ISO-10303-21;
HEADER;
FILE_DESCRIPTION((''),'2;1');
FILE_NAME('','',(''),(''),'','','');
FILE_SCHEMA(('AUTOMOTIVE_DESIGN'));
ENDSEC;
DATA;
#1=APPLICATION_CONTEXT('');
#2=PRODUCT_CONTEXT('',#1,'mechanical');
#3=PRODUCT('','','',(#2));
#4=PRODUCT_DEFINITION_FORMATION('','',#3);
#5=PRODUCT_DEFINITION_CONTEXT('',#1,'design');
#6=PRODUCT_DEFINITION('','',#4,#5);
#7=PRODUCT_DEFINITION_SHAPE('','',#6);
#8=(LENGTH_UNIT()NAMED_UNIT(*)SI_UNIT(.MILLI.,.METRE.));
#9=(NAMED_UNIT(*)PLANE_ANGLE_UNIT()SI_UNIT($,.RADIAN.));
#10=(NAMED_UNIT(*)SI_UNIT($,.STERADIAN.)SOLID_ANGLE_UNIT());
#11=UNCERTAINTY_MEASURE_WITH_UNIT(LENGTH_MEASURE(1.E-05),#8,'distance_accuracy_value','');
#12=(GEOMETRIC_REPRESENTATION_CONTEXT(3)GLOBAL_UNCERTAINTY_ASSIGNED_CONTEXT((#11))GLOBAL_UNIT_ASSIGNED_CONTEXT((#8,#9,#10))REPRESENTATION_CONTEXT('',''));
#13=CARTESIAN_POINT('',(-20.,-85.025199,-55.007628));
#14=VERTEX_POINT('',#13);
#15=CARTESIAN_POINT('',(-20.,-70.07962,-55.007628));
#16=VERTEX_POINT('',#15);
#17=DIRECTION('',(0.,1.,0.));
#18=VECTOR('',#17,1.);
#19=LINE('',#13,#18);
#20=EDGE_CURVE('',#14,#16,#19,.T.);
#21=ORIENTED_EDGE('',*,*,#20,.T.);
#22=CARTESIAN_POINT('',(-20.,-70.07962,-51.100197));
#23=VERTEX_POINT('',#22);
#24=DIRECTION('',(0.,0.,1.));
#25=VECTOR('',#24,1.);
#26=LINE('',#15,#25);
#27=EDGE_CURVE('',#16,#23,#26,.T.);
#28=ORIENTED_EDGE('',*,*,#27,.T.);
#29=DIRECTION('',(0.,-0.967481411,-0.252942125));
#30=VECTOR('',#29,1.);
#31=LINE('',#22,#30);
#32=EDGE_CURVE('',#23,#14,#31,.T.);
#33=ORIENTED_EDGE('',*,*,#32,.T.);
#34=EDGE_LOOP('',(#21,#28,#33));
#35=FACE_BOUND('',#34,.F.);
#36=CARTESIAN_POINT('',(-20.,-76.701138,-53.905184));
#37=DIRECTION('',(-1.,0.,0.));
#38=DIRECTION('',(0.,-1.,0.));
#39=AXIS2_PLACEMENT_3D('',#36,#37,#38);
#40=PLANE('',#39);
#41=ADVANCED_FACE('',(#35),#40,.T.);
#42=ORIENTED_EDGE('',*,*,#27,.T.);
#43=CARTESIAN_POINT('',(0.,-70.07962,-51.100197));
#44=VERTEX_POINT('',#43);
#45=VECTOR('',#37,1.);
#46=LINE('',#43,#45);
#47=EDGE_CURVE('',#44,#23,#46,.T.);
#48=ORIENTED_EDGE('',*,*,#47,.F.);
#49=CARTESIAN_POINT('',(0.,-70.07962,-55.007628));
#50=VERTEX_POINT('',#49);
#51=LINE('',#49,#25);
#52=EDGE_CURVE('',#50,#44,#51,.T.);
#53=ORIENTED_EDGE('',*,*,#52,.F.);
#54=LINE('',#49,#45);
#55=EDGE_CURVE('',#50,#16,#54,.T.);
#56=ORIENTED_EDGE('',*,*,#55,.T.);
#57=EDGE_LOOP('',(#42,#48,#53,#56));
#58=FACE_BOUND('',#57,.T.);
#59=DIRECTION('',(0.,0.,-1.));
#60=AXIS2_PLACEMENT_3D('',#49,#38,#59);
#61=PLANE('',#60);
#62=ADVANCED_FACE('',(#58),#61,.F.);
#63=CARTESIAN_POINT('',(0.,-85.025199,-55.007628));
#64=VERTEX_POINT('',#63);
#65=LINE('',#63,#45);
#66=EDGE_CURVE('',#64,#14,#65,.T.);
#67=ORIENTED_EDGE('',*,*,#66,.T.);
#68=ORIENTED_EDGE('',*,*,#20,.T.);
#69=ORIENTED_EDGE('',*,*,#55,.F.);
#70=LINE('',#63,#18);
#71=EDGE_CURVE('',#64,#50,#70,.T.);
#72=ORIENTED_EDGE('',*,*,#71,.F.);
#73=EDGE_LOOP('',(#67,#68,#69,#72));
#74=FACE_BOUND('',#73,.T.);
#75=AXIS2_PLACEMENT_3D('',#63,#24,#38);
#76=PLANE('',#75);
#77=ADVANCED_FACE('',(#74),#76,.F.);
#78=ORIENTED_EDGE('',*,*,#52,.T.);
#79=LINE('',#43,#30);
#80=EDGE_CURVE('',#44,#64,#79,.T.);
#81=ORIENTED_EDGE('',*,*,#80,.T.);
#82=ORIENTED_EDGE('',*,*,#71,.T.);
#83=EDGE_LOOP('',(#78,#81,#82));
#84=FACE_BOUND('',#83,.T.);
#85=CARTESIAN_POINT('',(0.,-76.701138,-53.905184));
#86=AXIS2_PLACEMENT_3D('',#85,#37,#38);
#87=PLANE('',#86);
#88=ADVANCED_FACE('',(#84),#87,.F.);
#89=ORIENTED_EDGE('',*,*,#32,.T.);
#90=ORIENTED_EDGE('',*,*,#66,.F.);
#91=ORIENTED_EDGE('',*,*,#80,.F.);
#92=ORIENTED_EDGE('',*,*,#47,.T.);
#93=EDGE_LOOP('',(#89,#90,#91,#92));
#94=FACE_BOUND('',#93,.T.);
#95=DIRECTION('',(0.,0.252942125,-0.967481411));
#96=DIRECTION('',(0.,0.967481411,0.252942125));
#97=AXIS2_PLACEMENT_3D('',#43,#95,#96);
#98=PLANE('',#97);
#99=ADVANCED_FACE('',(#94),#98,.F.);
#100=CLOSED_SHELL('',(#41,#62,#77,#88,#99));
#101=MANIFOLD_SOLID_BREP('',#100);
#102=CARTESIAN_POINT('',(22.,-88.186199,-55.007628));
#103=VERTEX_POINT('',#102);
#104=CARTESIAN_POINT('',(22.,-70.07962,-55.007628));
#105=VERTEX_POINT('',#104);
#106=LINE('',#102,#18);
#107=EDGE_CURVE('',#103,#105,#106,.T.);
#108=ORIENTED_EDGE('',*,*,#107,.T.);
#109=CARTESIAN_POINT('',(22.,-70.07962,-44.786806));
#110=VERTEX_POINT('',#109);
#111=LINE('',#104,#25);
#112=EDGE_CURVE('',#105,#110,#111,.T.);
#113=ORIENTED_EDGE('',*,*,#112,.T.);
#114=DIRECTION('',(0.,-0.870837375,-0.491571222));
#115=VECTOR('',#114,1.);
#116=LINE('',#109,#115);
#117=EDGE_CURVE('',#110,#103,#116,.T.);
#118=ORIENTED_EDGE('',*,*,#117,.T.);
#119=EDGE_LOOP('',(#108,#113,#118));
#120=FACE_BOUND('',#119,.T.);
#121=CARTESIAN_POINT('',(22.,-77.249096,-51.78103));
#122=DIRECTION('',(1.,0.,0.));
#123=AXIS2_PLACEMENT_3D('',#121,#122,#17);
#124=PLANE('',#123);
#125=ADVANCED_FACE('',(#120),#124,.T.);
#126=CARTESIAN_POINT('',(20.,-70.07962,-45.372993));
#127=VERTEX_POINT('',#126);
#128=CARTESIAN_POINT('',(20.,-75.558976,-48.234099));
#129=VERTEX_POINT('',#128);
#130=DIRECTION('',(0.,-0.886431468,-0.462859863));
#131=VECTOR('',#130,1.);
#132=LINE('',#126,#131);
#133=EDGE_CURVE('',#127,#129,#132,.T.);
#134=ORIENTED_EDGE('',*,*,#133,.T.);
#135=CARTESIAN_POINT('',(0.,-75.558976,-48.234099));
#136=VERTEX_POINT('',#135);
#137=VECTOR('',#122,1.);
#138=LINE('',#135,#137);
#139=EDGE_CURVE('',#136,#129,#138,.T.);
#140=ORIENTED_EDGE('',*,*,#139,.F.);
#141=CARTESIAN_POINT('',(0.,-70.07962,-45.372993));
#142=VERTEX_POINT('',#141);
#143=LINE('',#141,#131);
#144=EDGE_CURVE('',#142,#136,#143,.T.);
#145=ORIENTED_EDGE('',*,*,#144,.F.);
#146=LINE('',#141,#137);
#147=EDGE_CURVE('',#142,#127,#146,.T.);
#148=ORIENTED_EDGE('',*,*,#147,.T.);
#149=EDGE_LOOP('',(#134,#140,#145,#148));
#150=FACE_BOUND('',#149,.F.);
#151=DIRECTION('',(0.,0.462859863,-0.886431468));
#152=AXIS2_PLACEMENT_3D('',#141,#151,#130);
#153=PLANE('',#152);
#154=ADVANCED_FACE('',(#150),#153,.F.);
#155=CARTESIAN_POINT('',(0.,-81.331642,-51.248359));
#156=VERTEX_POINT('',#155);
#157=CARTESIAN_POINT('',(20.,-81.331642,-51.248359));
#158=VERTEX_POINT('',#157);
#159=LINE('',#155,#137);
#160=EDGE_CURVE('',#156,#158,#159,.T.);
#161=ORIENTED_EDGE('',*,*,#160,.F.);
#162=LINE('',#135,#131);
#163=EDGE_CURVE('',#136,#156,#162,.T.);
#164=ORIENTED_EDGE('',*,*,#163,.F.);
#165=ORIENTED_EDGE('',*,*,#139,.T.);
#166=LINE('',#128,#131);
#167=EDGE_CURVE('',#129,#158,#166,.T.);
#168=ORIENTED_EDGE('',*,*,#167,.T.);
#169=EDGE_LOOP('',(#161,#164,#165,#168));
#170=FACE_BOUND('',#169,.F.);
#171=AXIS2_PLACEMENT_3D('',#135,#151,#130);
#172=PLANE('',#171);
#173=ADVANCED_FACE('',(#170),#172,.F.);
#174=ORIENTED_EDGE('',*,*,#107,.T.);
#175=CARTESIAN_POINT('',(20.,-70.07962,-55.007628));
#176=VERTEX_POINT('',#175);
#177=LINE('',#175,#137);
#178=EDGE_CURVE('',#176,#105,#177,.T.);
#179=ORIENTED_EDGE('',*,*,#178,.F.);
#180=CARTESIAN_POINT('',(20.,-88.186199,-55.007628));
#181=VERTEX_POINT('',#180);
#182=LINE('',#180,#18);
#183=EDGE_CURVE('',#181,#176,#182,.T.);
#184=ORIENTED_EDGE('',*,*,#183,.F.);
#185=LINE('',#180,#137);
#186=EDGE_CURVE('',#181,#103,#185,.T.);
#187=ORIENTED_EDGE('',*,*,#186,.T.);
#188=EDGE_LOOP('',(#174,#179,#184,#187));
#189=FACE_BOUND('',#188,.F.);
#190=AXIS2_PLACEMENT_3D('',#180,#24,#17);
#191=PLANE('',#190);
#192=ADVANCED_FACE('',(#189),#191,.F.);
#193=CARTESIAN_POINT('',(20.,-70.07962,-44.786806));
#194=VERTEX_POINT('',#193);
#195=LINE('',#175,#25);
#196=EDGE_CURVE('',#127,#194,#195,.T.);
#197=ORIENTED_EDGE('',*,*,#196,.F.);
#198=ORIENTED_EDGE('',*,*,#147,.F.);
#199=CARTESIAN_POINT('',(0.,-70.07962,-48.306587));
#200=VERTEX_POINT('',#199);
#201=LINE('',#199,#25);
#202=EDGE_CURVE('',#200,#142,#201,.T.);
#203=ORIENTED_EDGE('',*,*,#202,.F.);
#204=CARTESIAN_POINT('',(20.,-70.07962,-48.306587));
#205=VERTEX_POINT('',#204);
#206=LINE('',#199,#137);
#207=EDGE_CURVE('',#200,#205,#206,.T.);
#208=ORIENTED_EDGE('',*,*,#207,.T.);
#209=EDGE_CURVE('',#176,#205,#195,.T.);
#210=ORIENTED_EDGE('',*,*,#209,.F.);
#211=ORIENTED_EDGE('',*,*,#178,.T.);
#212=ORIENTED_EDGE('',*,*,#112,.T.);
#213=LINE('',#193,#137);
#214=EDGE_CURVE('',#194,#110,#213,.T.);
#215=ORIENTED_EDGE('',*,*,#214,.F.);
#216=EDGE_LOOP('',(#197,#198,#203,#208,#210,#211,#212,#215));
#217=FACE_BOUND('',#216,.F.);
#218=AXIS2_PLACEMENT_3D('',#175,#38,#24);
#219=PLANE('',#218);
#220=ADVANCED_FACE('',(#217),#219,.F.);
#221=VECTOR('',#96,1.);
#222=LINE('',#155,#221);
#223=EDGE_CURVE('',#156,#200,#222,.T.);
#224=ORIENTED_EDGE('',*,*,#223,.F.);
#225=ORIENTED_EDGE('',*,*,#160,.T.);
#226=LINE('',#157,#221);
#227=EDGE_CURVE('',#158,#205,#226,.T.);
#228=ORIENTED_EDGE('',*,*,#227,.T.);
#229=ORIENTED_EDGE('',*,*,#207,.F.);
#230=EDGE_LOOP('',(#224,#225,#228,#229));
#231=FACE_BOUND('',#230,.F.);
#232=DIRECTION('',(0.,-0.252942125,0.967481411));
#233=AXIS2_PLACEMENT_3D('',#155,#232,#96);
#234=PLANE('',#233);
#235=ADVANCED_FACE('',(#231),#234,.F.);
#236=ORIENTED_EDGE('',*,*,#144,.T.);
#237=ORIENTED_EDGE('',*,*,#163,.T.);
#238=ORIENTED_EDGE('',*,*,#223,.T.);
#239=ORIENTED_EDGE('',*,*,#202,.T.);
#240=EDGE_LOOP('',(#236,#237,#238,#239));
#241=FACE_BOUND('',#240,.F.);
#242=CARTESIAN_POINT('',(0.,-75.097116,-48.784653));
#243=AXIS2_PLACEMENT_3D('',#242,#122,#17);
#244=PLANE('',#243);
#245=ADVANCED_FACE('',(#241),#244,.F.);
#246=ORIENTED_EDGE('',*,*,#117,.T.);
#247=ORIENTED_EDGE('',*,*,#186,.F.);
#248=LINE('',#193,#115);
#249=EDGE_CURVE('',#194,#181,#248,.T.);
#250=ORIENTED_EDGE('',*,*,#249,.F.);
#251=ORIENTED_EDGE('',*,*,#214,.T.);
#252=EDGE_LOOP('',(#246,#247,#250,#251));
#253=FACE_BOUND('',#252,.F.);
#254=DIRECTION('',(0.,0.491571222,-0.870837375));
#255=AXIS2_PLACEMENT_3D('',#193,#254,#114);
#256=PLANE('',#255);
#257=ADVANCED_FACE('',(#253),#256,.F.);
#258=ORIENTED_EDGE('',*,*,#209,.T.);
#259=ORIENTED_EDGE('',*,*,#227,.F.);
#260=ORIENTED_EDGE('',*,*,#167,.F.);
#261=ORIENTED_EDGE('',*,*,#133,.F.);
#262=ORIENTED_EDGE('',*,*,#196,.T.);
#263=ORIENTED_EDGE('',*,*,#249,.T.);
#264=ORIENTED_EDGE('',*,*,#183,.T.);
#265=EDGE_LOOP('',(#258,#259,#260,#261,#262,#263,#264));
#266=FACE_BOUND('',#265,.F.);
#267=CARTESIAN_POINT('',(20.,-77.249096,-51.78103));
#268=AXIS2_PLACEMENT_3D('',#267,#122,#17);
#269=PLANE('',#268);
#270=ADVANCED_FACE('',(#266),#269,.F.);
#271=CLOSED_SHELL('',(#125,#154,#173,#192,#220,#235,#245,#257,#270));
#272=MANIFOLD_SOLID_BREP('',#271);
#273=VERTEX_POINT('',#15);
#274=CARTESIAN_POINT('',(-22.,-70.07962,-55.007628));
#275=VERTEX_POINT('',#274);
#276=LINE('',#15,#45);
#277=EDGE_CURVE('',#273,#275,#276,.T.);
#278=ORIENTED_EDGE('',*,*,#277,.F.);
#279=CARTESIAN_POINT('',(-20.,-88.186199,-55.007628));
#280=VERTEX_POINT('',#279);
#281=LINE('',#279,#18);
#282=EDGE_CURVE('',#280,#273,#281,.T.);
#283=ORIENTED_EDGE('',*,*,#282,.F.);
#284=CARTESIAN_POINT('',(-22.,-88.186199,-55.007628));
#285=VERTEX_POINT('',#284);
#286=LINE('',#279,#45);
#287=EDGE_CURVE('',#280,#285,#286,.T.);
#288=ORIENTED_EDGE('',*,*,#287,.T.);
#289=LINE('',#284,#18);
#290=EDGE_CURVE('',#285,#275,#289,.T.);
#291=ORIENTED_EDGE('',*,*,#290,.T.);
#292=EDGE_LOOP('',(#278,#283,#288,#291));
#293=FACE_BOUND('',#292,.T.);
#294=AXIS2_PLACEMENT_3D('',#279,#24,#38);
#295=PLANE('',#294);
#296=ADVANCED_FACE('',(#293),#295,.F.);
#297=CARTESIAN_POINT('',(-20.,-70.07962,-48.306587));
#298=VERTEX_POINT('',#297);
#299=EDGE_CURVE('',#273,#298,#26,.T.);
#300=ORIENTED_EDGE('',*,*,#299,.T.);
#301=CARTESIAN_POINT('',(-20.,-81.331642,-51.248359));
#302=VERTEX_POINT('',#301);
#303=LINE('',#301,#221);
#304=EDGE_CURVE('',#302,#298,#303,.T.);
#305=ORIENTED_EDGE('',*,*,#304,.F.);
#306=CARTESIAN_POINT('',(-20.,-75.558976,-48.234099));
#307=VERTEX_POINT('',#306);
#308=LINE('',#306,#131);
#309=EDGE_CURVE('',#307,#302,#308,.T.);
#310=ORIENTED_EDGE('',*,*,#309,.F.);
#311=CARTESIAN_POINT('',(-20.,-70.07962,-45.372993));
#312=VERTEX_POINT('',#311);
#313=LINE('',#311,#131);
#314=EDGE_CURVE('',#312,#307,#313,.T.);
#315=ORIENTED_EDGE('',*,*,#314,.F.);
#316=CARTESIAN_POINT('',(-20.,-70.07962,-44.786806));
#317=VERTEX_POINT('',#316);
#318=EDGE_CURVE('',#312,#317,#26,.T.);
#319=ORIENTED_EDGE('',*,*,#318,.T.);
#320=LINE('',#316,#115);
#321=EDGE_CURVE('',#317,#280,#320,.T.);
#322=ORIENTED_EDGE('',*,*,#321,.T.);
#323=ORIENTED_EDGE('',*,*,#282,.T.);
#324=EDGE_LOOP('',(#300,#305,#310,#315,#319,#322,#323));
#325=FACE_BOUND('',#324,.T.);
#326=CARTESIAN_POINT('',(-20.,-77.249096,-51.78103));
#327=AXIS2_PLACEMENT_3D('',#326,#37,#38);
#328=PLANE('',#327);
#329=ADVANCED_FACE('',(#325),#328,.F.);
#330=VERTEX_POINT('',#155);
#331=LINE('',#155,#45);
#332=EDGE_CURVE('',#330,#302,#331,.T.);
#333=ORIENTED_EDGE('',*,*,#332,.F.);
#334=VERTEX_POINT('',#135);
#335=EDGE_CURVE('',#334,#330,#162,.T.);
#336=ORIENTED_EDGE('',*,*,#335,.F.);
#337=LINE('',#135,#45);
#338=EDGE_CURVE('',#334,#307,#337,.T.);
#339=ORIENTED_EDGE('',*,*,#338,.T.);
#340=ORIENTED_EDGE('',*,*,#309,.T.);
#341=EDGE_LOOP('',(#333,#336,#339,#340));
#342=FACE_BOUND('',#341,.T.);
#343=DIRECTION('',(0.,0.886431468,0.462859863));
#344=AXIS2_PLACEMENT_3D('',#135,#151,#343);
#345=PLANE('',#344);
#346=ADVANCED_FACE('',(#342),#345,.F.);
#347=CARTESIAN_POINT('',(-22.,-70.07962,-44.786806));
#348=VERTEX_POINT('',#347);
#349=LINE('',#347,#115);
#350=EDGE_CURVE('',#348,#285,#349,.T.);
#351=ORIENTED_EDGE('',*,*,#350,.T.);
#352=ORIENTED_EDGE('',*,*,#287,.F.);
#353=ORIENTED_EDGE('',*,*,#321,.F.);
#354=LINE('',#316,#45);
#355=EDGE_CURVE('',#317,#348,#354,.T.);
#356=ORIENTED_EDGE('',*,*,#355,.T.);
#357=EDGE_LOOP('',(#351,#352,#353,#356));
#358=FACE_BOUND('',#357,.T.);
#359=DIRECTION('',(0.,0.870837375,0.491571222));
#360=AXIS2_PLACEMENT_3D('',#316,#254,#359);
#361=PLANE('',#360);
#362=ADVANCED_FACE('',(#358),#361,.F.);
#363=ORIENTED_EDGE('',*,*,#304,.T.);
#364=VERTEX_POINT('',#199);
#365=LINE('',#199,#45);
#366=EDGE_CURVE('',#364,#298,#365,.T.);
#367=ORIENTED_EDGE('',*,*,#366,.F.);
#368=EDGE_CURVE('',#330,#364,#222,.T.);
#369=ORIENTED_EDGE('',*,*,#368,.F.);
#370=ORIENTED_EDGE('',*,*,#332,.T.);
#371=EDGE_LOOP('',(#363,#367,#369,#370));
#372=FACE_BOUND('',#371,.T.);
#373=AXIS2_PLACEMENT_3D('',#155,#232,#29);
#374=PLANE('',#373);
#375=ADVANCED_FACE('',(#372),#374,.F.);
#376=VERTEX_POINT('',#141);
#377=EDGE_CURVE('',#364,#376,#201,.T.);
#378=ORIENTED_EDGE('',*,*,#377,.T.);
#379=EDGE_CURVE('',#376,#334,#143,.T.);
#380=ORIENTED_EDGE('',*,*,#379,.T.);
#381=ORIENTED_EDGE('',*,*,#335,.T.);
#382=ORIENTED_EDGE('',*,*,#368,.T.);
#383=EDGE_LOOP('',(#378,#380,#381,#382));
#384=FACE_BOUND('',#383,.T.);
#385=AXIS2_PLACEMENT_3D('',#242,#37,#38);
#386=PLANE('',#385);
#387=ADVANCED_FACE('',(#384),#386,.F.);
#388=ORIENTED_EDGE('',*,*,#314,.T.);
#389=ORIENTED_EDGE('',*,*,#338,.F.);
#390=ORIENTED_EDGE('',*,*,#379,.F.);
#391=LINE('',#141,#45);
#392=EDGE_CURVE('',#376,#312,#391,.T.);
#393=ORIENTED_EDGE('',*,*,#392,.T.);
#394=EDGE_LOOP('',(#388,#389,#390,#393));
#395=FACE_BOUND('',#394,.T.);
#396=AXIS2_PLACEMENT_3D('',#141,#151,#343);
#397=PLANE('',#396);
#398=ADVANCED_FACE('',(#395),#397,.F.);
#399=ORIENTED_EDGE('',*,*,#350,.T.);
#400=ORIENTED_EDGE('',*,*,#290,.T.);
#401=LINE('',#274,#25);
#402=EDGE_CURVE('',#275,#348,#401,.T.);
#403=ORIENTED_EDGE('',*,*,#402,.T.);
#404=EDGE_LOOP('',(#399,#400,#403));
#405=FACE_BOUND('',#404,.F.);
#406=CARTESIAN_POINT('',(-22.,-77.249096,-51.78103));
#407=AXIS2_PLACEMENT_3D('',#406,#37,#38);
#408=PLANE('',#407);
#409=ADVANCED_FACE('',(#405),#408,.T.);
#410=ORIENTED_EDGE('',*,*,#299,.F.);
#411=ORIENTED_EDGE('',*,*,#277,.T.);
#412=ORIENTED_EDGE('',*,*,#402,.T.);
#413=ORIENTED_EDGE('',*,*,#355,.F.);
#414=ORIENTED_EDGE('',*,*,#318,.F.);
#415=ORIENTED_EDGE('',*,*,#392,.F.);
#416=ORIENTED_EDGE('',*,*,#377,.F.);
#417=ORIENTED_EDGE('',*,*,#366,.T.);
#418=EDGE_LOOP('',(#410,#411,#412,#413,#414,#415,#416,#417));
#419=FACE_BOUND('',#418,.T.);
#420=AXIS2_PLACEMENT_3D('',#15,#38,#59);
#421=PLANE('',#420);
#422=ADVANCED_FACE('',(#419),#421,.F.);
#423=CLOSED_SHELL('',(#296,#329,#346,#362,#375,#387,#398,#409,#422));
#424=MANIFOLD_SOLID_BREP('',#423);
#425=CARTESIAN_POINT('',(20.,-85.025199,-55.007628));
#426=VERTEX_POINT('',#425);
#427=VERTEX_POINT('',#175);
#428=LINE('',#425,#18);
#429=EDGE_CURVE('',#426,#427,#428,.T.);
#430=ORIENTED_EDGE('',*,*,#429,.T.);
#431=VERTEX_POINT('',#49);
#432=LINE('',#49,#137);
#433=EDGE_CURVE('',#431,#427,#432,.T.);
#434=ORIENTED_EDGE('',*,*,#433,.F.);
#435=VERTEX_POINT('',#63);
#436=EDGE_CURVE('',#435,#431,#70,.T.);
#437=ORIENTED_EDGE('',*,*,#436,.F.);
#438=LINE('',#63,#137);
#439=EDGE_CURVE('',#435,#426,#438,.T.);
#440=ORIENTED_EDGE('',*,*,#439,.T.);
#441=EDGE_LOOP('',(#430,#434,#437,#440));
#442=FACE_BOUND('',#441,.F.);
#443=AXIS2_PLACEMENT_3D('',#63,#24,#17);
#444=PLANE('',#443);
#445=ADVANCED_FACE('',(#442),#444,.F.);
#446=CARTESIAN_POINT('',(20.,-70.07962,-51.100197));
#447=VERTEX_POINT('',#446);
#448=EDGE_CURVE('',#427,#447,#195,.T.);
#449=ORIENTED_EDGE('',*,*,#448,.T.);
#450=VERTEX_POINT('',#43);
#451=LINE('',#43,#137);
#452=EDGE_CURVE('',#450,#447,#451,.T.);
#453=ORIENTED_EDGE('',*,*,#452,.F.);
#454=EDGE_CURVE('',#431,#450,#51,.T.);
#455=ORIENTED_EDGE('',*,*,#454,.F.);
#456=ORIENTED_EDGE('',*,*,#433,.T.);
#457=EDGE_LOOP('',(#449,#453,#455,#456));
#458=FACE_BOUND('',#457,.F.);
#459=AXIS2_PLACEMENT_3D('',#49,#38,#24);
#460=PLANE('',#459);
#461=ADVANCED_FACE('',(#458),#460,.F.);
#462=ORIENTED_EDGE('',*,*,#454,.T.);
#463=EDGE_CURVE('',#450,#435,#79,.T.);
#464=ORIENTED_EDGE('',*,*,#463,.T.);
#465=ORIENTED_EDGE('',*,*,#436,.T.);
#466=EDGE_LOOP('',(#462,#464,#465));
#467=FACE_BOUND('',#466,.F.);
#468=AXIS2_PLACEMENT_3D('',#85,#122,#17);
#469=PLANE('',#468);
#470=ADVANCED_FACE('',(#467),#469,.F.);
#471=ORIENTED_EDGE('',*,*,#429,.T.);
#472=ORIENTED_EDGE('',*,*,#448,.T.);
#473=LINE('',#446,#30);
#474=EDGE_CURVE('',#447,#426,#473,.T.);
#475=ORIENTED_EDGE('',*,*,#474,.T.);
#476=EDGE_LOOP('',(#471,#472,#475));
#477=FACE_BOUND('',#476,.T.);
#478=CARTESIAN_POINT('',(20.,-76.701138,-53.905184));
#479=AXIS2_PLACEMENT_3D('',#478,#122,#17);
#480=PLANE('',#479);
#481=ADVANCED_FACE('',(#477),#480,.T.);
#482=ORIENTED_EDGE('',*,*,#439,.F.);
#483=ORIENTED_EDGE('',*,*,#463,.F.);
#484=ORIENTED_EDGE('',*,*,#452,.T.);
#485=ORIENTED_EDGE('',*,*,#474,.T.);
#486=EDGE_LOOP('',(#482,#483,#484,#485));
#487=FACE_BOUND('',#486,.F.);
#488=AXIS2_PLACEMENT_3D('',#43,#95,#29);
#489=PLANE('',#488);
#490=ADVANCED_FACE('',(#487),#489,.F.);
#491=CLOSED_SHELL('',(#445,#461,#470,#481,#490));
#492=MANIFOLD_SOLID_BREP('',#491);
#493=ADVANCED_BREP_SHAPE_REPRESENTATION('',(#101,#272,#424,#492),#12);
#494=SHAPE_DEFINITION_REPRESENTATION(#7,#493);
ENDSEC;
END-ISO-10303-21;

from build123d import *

# Parameters (mm, degrees)
F1_DEPTH = 20
F3_DEPTH = 2


with BuildPart() as f1:
    # F0 (on Right) → F1 (new body)
    with BuildSketch(Plane.YZ):
        Polygon((-70.0796197427, -51.1001968513), (-85.0251993612, -55.0076276596), (-75.5720644497, -55.0076276596), (-75.5589757706, -55.0076276596), (-70.0796197427, -55.0076276596), align=None)
    extrude(amount=F1_DEPTH)


with BuildPart() as f1b:
    # F0 (on Right) → F1, piece 2 (new body)
    with BuildSketch(Plane.YZ):
        Polygon((-81.3316421735, -51.2483594349), (-70.0796197427, -48.3065866685), (-70.0796197427, -45.3729931479), (-75.5589757706, -48.234098685), (-75.5589757706, -48.3106762914), align=None)
        Polygon((-75.5589757706, -48.234098685), (-81.3316421735, -51.2483594349), (-75.5589757706, -48.3106762914), align=None)
    extrude(amount=F1_DEPTH)

    # F2 (on face) → F3 (join)
    with BuildSketch(Plane.YZ.offset(20)):
        Polygon((-88.1861992102, -55.0076276596), (-70.0796197427, -55.0076276596), (-70.0796197427, -44.786806123), align=None)
    extrude(amount=F3_DEPTH)


with BuildPart() as f4_1:
    # F4: instance of F1
    add(f1.part.mirror(Plane.YZ))


with BuildPart() as f4_2:
    # F4: instance of F1b
    add(f1b.part.mirror(Plane.YZ))


solid = Compound([f1.part, f1b.part, f4_1.part, f4_2.part])
